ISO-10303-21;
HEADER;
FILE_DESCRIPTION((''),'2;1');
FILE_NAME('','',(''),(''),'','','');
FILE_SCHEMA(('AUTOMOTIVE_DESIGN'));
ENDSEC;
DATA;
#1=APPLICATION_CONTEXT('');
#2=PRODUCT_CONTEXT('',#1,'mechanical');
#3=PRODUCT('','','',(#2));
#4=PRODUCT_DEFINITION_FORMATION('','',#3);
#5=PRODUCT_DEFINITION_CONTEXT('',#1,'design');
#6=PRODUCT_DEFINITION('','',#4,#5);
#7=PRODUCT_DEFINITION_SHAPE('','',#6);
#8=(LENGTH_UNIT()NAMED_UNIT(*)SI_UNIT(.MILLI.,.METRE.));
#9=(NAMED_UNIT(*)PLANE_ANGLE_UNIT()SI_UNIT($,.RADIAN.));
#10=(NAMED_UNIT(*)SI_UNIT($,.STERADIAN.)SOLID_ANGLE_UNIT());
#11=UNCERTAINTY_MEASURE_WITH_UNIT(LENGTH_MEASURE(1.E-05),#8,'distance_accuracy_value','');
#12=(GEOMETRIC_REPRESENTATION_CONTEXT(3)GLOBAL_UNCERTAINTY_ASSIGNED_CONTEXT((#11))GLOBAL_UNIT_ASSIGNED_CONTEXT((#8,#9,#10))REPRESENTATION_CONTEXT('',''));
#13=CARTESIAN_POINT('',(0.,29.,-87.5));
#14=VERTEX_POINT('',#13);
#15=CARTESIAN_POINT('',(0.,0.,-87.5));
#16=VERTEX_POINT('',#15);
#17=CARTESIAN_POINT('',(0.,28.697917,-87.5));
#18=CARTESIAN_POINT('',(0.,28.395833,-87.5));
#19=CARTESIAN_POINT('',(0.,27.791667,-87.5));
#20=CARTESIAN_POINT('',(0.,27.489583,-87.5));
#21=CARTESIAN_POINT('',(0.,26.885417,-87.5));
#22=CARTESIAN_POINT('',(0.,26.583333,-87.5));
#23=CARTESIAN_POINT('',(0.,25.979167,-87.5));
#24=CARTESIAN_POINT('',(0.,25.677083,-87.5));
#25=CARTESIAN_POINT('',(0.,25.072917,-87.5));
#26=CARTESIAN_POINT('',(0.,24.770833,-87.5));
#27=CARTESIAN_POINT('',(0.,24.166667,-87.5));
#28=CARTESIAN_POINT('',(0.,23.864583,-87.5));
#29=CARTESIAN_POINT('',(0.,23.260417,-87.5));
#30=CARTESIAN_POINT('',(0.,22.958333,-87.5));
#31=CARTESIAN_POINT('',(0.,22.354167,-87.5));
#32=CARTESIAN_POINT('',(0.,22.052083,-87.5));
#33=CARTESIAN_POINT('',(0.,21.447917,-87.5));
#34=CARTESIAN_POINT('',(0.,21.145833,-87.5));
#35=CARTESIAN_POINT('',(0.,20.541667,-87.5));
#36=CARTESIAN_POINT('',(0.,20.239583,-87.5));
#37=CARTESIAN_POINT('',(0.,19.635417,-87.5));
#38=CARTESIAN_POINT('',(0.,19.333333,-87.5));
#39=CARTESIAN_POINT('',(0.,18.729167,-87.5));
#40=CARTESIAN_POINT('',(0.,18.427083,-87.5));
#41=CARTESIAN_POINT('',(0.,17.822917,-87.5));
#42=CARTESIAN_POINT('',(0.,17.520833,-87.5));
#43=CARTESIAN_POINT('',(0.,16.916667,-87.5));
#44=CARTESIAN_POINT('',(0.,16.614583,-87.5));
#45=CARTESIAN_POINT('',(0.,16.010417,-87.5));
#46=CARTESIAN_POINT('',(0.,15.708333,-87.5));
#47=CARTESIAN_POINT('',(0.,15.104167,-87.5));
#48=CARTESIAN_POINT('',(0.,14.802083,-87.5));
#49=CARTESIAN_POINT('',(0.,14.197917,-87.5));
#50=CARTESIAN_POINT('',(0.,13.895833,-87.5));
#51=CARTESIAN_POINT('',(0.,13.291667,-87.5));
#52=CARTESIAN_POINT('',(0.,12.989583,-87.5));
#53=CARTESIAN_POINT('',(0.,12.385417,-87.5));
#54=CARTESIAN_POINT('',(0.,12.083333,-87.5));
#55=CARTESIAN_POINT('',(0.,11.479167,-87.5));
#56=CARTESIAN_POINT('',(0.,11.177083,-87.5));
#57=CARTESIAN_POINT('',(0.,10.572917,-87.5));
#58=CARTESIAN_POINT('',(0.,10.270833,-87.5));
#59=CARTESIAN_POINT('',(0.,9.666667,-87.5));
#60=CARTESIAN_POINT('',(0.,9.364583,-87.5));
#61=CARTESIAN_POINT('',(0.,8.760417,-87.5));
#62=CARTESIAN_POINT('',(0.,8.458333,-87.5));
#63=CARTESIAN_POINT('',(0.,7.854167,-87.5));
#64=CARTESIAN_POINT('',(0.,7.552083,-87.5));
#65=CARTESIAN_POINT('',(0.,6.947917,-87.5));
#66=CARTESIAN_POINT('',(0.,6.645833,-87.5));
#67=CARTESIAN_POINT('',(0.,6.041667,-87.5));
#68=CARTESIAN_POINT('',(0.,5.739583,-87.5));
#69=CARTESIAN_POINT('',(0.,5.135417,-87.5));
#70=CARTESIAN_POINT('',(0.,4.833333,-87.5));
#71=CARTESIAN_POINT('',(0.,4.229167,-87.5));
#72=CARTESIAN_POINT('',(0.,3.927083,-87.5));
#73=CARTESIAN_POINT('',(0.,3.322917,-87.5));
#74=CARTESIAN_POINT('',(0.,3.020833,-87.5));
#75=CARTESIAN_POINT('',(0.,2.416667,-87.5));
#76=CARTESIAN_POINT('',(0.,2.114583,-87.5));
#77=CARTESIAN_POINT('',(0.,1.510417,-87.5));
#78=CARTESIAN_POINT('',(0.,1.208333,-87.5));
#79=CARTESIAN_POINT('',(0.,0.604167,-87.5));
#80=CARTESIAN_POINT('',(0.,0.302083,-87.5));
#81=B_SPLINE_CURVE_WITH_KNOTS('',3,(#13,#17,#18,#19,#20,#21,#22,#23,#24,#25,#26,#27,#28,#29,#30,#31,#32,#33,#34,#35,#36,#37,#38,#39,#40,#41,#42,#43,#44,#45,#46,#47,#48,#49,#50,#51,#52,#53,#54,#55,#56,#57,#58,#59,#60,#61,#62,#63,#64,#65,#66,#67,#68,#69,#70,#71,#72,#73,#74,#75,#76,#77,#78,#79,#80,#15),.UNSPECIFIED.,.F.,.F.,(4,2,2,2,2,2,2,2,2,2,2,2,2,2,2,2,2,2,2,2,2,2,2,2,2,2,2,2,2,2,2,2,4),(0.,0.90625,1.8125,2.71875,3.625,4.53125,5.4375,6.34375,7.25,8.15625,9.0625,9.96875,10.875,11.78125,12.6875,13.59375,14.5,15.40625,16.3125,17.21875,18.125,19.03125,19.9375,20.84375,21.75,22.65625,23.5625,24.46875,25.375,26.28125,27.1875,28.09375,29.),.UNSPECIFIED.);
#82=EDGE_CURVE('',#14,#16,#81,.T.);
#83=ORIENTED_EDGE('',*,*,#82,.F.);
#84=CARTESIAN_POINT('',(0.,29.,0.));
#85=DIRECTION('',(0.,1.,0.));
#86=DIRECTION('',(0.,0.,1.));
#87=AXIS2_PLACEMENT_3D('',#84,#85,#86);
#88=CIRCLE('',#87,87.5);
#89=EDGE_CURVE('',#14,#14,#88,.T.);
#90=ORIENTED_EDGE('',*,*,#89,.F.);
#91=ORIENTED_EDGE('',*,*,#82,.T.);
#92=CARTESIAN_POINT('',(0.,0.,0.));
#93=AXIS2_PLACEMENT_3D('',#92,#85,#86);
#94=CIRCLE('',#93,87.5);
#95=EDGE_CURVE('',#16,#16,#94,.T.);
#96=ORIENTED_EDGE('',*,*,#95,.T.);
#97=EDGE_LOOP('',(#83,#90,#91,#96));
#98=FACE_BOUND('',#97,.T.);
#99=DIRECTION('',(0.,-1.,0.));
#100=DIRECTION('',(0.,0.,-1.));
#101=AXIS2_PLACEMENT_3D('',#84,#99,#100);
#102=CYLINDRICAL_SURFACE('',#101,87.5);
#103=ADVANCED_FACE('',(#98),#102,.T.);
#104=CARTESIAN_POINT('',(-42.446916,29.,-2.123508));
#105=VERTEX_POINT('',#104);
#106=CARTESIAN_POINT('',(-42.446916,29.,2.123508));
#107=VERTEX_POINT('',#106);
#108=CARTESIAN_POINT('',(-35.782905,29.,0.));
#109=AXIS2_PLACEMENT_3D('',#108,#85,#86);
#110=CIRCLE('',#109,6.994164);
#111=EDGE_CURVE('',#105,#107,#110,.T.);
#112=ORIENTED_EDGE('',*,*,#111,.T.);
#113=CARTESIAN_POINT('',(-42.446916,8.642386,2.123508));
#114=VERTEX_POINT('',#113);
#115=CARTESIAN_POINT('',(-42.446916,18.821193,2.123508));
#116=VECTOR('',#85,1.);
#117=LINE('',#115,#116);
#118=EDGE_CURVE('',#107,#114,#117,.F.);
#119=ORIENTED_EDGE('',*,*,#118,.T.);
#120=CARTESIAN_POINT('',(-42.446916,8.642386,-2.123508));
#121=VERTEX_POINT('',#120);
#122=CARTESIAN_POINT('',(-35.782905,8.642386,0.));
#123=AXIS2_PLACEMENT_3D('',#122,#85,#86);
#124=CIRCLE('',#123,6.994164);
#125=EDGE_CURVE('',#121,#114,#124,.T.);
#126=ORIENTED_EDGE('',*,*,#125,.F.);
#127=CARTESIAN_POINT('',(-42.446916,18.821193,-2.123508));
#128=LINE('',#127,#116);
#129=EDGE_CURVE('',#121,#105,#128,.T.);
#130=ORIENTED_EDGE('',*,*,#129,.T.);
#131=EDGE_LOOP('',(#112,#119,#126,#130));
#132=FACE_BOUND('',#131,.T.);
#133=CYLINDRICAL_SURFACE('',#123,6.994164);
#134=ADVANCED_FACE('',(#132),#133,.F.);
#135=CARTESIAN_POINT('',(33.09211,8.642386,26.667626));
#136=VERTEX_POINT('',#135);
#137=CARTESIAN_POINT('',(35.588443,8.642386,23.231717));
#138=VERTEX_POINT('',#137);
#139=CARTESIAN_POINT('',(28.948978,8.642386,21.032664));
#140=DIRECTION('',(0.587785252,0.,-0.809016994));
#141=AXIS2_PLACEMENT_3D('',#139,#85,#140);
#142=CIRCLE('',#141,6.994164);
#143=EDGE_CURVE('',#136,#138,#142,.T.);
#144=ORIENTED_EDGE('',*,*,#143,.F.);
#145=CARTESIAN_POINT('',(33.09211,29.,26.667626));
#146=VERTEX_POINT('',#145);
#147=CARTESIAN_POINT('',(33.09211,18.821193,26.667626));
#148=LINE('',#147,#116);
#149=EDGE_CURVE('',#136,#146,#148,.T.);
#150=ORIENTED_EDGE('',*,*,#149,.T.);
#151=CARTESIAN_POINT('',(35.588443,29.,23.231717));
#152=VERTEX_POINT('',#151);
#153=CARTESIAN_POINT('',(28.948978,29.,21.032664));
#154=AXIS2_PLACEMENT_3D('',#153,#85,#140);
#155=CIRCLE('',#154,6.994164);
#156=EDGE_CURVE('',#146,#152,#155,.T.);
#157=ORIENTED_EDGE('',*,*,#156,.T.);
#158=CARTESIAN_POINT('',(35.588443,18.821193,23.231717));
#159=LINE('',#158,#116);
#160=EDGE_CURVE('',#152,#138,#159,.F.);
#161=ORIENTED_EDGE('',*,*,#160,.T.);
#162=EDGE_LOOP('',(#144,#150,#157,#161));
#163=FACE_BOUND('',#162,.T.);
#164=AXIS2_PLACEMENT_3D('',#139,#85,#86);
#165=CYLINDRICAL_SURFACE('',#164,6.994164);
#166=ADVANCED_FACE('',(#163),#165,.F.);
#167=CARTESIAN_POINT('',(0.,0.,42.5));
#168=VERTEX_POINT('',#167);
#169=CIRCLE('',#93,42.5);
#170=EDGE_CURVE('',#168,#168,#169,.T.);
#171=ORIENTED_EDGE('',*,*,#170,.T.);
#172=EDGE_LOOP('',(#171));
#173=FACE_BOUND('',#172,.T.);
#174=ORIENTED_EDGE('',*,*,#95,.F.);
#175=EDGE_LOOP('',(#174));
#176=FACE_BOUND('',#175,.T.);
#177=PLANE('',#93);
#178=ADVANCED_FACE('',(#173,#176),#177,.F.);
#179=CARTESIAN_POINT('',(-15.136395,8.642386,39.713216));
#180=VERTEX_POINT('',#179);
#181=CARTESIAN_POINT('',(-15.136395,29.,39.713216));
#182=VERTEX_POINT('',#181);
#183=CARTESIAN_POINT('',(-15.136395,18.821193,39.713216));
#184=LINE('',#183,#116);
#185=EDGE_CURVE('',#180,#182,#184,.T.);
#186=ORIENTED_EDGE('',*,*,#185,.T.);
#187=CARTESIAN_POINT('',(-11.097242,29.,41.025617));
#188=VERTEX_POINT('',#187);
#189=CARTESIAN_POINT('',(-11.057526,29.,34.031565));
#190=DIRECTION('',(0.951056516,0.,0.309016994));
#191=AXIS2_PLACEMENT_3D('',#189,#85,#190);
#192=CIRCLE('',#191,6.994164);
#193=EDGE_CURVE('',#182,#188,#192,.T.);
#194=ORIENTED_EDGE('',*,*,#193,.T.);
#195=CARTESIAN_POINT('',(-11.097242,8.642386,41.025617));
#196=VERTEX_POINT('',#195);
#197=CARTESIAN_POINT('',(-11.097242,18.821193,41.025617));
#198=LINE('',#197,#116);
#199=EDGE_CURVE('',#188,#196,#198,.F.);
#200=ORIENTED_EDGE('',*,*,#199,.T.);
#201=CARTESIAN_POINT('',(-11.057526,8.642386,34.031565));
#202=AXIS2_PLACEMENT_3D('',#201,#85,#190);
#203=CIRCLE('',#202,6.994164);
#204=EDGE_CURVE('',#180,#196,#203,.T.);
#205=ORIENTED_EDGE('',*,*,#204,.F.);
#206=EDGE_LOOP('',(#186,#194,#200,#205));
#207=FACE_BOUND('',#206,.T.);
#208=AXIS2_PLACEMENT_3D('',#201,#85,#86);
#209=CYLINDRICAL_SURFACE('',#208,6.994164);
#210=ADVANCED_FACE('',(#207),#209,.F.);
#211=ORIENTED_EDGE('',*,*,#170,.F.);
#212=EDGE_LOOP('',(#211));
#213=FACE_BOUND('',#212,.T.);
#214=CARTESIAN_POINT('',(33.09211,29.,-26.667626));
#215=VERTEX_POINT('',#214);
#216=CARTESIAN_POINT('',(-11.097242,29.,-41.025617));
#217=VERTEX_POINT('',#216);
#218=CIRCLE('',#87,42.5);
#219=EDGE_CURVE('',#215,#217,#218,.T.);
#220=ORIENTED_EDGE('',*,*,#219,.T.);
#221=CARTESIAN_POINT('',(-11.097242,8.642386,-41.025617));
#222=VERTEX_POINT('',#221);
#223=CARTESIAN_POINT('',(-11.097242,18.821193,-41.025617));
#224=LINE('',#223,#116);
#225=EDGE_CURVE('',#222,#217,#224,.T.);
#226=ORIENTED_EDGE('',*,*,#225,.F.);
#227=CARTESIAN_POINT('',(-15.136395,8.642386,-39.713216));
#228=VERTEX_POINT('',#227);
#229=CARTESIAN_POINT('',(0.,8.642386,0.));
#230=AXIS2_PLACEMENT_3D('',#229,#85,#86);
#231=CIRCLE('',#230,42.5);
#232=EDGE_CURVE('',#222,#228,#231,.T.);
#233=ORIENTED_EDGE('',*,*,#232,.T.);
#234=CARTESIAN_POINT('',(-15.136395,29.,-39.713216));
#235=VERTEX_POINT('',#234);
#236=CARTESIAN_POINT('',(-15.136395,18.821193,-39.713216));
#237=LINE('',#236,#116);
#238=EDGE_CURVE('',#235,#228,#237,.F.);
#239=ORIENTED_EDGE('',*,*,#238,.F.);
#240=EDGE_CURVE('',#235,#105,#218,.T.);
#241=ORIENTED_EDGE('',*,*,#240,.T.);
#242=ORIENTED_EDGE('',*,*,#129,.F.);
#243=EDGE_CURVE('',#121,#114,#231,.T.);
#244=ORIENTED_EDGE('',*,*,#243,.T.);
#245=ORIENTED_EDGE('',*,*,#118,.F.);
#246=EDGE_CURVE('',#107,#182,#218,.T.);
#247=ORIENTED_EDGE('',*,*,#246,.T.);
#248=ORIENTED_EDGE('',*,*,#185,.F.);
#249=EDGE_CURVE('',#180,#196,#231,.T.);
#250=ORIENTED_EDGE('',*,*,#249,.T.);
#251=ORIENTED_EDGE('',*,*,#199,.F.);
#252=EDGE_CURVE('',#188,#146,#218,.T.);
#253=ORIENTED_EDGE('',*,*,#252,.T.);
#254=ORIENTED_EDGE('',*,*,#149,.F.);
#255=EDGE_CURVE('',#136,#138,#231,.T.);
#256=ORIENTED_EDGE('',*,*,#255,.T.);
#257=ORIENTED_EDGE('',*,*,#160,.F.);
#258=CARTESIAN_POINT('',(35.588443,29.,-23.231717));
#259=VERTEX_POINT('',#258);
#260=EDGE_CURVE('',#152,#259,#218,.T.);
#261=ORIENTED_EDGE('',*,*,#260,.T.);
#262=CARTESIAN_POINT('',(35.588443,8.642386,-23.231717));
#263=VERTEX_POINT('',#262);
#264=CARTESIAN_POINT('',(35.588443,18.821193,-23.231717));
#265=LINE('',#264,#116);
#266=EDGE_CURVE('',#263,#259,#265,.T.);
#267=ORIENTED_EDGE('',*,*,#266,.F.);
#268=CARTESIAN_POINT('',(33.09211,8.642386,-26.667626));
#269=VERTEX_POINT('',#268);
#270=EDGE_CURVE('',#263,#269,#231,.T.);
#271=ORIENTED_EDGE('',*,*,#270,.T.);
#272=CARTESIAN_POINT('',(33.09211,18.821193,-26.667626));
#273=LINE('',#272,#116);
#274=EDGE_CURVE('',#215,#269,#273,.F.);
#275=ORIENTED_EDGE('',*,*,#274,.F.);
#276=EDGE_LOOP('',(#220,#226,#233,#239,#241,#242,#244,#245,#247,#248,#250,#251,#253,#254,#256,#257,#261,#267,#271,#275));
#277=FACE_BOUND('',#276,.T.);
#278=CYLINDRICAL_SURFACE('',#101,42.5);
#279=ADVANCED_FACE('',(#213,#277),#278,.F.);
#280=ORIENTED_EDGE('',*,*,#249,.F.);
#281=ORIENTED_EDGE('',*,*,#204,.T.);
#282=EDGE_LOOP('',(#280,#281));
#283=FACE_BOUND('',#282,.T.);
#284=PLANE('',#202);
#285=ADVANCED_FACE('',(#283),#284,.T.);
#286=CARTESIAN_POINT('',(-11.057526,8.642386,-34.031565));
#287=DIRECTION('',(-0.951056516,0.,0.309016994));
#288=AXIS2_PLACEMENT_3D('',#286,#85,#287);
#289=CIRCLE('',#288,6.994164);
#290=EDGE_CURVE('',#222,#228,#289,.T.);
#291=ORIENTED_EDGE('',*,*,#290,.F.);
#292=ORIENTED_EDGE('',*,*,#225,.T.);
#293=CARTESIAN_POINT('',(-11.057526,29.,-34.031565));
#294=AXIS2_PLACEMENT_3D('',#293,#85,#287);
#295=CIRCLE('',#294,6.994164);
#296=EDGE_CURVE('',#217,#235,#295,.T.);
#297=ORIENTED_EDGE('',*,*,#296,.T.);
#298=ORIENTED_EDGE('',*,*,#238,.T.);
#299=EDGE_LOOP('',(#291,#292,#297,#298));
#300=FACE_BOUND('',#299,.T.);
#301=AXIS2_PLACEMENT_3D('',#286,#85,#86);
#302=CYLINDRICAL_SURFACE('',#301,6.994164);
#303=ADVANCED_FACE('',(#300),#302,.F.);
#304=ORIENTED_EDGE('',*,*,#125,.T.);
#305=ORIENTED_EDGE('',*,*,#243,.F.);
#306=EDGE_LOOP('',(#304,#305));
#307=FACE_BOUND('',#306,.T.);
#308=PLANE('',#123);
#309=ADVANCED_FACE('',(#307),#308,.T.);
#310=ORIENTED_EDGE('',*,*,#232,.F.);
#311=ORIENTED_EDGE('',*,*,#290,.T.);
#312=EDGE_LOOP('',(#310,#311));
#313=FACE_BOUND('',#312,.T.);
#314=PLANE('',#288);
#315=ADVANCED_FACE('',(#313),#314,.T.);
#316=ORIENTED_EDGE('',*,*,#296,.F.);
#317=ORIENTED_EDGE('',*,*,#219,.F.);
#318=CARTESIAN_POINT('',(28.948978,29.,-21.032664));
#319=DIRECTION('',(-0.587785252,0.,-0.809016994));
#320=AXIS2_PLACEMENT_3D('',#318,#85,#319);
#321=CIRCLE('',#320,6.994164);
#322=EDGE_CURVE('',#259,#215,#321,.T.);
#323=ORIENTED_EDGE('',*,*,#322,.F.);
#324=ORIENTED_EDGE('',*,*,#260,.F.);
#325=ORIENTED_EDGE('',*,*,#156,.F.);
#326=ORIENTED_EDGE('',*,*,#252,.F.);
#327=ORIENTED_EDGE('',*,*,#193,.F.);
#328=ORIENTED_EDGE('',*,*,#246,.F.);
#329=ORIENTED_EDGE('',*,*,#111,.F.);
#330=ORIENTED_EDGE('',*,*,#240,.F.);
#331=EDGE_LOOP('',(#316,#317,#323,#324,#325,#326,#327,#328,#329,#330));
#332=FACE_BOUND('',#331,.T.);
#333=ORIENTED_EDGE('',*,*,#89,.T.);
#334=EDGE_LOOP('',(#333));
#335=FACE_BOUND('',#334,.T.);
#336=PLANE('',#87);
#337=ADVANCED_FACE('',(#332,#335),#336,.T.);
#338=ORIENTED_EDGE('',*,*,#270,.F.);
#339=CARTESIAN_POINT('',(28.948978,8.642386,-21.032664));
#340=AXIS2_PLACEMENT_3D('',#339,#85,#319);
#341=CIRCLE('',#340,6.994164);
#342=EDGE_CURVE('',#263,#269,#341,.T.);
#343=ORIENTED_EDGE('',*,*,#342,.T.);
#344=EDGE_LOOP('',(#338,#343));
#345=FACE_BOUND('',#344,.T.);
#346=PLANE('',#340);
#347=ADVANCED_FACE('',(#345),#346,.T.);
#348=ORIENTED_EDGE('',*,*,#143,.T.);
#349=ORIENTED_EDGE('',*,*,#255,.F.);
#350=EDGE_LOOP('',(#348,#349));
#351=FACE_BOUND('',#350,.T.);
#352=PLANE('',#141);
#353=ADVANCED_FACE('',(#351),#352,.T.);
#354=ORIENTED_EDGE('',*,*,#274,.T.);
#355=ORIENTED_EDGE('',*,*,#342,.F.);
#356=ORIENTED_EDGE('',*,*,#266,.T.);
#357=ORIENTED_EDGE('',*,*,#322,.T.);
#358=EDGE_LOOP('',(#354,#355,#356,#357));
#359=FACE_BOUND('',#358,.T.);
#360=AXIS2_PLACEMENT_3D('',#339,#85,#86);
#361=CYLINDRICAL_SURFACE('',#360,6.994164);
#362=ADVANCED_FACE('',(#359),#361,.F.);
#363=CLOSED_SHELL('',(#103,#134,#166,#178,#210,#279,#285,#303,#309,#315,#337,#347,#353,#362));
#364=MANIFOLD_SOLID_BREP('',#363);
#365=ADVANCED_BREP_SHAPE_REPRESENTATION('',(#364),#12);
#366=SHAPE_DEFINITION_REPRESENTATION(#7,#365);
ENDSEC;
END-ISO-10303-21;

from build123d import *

# Parameters (mm, degrees)
SKETCH1_R           = 87.5
BOSS_EXTRUDE1_DEPTH = 29
SKETCH2_R           = 42.5
CUT_EXTRUDE1_DEPTH  = 128.096420091
SKETCH3_R           = 6.994164165
CUT_EXTRUDE2_DEPTH  = 20.357613701
CIRPATTERN1_COUNT   = 5


with BuildPart() as part:
    # Sketch1 → Boss-Extrude1 (new body)
    with BuildSketch(Plane(origin=(0, 0, 0), x_dir=(1, 0, 0), z_dir=(0, 1, 0))):
        Circle(SKETCH1_R)
    extrude(amount=BOSS_EXTRUDE1_DEPTH)

    # Sketch2 → Cut-Extrude1 (cut, through all)
    with BuildSketch(Plane(origin=(0, 0, 0), x_dir=(1, 0, 0), z_dir=(0, 1, 0))):
        Circle(SKETCH2_R)
    extrude(amount=CUT_EXTRUDE1_DEPTH, mode=Mode.SUBTRACT)

    # Sketch3 → Cut-Extrude2 (cut)
    with BuildSketch(Plane(origin=(0, 29, 0), x_dir=(1, 0, 0), z_dir=(0, 1, 0))):
        with Locations((-35.782905188, 0)):
            Circle(SKETCH3_R)
    cut_extrude2 = extrude(amount=-CUT_EXTRUDE2_DEPTH, mode=Mode.SUBTRACT)

    # CirPattern1: Cut-Extrude2 ×5 about axis
    cirpattern1_axis = Axis((0, 0, 0), (0, 1, 0))
    for i in range(1, CIRPATTERN1_COUNT):
        add(cut_extrude2.rotate(cirpattern1_axis, i * 360 / CIRPATTERN1_COUNT), mode=Mode.SUBTRACT)


solid = part.part
